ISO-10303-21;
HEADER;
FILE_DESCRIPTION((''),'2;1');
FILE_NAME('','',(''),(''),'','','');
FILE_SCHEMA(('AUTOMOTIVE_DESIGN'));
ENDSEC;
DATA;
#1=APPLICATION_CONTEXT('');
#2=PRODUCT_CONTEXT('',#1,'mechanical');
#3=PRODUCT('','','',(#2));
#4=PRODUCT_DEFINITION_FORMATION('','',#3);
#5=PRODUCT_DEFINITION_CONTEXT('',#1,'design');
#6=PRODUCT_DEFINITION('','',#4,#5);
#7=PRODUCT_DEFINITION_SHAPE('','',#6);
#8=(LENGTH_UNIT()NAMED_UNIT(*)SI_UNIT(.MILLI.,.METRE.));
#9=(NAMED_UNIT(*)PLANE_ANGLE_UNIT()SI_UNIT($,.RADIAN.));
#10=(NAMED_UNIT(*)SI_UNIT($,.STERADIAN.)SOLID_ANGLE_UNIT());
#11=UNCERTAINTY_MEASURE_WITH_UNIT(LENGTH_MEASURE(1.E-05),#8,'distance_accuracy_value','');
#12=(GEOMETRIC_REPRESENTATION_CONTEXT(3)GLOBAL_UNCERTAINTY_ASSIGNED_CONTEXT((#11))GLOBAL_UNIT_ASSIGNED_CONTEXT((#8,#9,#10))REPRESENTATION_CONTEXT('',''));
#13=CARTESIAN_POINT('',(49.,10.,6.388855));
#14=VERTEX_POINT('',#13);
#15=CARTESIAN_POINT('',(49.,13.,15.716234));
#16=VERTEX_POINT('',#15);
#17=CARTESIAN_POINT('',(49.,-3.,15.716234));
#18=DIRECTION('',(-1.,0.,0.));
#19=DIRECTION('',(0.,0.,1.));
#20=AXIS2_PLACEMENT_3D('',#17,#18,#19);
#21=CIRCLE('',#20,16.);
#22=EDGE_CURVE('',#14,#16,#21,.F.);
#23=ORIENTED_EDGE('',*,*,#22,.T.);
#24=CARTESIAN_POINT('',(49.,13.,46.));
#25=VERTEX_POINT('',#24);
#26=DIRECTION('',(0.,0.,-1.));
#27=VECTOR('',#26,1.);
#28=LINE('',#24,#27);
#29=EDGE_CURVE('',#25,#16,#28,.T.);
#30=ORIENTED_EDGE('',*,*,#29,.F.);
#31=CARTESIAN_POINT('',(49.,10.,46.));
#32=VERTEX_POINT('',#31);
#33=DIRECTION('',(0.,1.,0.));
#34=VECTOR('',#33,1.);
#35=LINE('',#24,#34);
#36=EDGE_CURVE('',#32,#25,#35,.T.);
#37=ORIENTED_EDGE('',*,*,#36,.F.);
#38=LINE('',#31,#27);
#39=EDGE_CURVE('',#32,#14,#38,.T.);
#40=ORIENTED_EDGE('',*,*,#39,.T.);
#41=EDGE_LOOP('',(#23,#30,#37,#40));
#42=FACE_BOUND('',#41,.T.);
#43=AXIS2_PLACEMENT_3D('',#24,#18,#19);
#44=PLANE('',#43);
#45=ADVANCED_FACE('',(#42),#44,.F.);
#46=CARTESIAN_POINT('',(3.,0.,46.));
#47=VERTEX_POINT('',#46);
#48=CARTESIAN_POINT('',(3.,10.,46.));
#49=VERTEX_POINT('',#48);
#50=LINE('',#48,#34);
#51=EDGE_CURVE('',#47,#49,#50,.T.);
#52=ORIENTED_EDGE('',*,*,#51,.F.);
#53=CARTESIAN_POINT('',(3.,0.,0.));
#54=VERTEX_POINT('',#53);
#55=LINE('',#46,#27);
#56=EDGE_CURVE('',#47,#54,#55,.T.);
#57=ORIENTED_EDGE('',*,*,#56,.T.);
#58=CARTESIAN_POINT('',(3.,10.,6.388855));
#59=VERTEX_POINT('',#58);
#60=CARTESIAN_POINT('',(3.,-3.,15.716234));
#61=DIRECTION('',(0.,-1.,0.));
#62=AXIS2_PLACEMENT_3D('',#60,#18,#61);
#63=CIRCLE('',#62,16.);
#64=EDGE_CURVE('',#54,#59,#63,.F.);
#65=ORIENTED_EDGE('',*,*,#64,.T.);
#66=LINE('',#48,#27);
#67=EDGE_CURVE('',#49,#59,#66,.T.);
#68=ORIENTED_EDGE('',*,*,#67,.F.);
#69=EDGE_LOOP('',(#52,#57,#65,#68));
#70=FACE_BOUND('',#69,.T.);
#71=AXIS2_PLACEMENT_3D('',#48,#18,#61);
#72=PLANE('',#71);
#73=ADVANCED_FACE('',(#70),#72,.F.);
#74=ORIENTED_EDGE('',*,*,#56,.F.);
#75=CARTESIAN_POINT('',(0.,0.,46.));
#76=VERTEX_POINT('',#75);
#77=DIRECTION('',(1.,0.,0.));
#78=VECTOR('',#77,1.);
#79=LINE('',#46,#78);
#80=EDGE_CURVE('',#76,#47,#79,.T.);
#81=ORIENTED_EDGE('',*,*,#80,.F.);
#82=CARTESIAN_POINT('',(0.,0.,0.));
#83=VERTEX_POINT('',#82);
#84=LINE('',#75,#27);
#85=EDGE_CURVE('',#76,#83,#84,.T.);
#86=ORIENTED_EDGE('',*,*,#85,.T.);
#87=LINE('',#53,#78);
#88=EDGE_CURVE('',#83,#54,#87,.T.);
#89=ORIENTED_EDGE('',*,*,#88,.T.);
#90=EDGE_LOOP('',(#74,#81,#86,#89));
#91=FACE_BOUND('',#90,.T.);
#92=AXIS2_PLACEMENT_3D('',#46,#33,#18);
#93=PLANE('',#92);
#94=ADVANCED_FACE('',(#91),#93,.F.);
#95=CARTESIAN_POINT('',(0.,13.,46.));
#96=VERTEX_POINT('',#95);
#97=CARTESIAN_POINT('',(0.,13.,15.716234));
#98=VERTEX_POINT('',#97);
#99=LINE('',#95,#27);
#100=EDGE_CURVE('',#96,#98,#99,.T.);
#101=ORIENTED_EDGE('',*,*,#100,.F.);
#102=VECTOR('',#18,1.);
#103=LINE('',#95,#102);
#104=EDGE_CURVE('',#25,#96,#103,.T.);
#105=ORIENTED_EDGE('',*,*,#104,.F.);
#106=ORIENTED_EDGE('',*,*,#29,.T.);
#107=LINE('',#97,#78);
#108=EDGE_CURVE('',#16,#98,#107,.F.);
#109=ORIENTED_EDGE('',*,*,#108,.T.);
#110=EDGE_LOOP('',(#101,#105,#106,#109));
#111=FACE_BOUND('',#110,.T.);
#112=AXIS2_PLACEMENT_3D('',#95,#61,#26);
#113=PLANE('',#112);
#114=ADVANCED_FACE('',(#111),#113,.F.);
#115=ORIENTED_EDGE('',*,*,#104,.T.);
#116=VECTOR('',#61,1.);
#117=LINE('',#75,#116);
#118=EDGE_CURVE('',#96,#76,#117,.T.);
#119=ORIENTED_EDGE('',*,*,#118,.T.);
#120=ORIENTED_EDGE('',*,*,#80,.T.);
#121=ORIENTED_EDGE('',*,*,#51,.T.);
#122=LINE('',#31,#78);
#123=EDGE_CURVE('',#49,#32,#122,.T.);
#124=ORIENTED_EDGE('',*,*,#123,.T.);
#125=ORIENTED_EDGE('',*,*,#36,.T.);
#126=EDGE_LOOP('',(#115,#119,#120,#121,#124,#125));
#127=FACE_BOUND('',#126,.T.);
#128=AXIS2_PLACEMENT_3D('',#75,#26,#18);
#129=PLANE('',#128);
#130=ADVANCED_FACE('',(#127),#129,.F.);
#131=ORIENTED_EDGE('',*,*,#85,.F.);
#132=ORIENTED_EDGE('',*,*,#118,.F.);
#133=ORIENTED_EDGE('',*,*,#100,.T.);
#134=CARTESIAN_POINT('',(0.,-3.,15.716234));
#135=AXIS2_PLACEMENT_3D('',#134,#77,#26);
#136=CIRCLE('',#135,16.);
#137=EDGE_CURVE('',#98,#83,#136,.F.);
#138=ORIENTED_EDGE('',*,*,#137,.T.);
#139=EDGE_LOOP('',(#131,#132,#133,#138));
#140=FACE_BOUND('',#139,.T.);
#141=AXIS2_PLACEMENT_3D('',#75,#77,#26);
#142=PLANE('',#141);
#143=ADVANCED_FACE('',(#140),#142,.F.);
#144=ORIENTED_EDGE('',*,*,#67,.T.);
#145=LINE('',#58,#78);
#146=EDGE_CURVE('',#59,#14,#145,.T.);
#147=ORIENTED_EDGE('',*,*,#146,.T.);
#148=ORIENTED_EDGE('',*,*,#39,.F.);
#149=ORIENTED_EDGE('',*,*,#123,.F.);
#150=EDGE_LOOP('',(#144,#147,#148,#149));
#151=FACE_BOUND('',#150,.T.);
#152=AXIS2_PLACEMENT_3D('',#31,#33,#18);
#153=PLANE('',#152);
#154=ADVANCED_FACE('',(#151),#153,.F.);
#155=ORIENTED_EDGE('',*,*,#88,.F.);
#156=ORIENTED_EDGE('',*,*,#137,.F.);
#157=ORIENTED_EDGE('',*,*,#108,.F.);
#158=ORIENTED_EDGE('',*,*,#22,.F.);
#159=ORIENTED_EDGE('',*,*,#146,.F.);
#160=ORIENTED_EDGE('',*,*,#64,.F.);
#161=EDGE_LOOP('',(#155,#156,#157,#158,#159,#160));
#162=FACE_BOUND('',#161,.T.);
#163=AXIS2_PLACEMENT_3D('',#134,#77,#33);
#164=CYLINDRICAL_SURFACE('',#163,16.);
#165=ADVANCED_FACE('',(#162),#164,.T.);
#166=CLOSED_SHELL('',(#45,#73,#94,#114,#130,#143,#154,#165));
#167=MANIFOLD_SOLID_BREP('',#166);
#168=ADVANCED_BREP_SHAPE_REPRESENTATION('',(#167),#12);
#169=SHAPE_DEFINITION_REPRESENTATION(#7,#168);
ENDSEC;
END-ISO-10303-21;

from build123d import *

# Parameters (mm, degrees)
Y_KSEKLIK_EKSTR_ZYON1_DEPTH = 46
RADYUS1_DEPTH               = 49


with BuildPart() as part:
    # Çizim1 → Yükseklik-Ekstrüzyon1 (new body)
    with BuildSketch(Plane.XY):
        Polygon((0, 0), (0, 13), (49, 13), (49, 10), (3, 10), (3, 0), align=None)
    extrude(amount=Y_KSEKLIK_EKSTR_ZYON1_DEPTH)

    # Radyus1: read off the stored shape, not the designer's step
    # Radyus1 outline → Radyus1 (cut)
    with BuildSketch(Plane.YZ):
        with BuildLine():
            Line((0, 0), (13, 0))
            Line((13, 0), (13, 15.716233646))
            ThreePointArc((13, 15.716233646), (9.328828006, 5.518194618), (0, 0))
        make_face()
    extrude(amount=RADYUS1_DEPTH, mode=Mode.SUBTRACT)


solid = part.part
